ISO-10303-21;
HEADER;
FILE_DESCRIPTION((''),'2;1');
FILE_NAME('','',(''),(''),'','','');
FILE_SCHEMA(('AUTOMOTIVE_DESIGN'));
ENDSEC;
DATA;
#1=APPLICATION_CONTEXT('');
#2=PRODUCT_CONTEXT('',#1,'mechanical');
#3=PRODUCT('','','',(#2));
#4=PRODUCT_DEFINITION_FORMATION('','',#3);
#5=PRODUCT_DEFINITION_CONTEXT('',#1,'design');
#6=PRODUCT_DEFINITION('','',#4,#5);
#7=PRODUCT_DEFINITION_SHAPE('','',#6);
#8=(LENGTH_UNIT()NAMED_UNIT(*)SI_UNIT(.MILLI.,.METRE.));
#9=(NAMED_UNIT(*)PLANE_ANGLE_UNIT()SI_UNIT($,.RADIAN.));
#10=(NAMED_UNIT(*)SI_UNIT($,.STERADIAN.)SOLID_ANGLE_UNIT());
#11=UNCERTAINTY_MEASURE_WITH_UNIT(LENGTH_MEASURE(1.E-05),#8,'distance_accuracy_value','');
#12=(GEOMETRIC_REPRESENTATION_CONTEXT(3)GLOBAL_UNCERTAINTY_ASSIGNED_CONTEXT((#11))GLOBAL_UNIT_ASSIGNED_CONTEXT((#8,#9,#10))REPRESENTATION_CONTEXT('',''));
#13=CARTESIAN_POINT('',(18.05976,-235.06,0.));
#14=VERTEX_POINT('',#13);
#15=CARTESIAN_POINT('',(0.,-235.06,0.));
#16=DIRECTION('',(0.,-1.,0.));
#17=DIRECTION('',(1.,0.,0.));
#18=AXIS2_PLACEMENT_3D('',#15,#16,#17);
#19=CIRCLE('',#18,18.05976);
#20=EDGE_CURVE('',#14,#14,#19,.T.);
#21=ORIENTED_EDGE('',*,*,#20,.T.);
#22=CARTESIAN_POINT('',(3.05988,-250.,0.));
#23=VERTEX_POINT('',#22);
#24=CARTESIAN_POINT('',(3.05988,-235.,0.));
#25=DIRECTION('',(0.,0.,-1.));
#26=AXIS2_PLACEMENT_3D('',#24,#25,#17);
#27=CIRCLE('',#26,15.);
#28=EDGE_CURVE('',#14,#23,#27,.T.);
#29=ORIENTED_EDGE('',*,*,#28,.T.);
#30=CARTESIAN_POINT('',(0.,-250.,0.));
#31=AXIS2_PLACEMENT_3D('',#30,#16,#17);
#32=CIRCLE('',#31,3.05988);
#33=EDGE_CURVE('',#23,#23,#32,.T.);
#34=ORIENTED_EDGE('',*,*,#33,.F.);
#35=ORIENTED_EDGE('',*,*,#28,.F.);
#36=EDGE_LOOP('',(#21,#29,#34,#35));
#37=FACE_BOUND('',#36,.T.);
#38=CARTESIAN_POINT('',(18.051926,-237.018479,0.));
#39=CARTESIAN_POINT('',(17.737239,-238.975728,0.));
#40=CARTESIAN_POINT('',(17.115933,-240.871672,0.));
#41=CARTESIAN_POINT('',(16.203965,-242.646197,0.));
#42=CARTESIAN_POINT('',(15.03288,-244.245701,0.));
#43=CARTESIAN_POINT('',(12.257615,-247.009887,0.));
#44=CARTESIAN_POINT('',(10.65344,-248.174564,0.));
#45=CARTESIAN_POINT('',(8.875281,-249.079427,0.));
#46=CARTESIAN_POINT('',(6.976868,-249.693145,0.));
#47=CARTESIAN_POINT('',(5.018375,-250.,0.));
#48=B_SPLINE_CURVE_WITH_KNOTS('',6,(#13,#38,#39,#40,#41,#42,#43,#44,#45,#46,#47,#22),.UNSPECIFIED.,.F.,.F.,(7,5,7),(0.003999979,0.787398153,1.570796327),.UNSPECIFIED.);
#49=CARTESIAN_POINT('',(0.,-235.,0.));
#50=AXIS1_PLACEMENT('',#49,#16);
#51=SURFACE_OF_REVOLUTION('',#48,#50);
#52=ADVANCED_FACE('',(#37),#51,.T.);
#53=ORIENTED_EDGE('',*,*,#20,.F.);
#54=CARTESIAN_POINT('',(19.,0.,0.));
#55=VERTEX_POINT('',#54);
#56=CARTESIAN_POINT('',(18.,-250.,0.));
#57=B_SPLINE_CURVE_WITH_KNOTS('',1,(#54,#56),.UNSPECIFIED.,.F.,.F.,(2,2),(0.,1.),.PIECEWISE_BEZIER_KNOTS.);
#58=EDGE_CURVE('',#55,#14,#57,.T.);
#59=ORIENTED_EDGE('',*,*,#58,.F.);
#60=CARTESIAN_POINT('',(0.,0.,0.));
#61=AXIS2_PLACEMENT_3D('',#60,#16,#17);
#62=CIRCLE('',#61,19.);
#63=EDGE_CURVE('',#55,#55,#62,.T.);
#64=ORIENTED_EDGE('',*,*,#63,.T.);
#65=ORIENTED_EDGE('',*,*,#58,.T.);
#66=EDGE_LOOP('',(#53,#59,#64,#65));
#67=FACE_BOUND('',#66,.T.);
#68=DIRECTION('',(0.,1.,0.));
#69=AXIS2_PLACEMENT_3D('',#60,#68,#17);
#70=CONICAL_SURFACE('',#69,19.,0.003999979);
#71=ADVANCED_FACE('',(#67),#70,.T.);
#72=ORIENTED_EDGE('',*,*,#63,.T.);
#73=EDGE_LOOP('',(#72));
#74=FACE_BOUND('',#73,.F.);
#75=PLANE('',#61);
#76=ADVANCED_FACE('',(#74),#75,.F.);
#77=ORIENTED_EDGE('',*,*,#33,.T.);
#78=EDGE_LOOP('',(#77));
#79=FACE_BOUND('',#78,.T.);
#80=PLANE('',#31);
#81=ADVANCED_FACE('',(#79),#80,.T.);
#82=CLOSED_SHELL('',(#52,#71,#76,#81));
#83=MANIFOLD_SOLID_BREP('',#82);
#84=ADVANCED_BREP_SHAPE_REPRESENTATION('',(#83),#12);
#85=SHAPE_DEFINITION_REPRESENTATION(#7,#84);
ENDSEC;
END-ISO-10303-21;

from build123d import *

# Parameters (mm, degrees)
F0_R = 19
F2_R = 18
F4_R = 15


with BuildPart() as f3:
    # F0 (on Front) → F3 section 0
    with BuildSketch(Plane.XZ):
        Circle(F0_R)
    # F2 (on offset) → F3 section 1
    with BuildSketch(Plane.XZ.offset(250)):
        Circle(F2_R)
    loft()

    # F4
    f4_edges = [f3.edges().sort_by_distance(p)[0] for p in [
        (-18, -250, 0),
    ]]
    fillet(f4_edges, radius=F4_R)


solid = f3.part
